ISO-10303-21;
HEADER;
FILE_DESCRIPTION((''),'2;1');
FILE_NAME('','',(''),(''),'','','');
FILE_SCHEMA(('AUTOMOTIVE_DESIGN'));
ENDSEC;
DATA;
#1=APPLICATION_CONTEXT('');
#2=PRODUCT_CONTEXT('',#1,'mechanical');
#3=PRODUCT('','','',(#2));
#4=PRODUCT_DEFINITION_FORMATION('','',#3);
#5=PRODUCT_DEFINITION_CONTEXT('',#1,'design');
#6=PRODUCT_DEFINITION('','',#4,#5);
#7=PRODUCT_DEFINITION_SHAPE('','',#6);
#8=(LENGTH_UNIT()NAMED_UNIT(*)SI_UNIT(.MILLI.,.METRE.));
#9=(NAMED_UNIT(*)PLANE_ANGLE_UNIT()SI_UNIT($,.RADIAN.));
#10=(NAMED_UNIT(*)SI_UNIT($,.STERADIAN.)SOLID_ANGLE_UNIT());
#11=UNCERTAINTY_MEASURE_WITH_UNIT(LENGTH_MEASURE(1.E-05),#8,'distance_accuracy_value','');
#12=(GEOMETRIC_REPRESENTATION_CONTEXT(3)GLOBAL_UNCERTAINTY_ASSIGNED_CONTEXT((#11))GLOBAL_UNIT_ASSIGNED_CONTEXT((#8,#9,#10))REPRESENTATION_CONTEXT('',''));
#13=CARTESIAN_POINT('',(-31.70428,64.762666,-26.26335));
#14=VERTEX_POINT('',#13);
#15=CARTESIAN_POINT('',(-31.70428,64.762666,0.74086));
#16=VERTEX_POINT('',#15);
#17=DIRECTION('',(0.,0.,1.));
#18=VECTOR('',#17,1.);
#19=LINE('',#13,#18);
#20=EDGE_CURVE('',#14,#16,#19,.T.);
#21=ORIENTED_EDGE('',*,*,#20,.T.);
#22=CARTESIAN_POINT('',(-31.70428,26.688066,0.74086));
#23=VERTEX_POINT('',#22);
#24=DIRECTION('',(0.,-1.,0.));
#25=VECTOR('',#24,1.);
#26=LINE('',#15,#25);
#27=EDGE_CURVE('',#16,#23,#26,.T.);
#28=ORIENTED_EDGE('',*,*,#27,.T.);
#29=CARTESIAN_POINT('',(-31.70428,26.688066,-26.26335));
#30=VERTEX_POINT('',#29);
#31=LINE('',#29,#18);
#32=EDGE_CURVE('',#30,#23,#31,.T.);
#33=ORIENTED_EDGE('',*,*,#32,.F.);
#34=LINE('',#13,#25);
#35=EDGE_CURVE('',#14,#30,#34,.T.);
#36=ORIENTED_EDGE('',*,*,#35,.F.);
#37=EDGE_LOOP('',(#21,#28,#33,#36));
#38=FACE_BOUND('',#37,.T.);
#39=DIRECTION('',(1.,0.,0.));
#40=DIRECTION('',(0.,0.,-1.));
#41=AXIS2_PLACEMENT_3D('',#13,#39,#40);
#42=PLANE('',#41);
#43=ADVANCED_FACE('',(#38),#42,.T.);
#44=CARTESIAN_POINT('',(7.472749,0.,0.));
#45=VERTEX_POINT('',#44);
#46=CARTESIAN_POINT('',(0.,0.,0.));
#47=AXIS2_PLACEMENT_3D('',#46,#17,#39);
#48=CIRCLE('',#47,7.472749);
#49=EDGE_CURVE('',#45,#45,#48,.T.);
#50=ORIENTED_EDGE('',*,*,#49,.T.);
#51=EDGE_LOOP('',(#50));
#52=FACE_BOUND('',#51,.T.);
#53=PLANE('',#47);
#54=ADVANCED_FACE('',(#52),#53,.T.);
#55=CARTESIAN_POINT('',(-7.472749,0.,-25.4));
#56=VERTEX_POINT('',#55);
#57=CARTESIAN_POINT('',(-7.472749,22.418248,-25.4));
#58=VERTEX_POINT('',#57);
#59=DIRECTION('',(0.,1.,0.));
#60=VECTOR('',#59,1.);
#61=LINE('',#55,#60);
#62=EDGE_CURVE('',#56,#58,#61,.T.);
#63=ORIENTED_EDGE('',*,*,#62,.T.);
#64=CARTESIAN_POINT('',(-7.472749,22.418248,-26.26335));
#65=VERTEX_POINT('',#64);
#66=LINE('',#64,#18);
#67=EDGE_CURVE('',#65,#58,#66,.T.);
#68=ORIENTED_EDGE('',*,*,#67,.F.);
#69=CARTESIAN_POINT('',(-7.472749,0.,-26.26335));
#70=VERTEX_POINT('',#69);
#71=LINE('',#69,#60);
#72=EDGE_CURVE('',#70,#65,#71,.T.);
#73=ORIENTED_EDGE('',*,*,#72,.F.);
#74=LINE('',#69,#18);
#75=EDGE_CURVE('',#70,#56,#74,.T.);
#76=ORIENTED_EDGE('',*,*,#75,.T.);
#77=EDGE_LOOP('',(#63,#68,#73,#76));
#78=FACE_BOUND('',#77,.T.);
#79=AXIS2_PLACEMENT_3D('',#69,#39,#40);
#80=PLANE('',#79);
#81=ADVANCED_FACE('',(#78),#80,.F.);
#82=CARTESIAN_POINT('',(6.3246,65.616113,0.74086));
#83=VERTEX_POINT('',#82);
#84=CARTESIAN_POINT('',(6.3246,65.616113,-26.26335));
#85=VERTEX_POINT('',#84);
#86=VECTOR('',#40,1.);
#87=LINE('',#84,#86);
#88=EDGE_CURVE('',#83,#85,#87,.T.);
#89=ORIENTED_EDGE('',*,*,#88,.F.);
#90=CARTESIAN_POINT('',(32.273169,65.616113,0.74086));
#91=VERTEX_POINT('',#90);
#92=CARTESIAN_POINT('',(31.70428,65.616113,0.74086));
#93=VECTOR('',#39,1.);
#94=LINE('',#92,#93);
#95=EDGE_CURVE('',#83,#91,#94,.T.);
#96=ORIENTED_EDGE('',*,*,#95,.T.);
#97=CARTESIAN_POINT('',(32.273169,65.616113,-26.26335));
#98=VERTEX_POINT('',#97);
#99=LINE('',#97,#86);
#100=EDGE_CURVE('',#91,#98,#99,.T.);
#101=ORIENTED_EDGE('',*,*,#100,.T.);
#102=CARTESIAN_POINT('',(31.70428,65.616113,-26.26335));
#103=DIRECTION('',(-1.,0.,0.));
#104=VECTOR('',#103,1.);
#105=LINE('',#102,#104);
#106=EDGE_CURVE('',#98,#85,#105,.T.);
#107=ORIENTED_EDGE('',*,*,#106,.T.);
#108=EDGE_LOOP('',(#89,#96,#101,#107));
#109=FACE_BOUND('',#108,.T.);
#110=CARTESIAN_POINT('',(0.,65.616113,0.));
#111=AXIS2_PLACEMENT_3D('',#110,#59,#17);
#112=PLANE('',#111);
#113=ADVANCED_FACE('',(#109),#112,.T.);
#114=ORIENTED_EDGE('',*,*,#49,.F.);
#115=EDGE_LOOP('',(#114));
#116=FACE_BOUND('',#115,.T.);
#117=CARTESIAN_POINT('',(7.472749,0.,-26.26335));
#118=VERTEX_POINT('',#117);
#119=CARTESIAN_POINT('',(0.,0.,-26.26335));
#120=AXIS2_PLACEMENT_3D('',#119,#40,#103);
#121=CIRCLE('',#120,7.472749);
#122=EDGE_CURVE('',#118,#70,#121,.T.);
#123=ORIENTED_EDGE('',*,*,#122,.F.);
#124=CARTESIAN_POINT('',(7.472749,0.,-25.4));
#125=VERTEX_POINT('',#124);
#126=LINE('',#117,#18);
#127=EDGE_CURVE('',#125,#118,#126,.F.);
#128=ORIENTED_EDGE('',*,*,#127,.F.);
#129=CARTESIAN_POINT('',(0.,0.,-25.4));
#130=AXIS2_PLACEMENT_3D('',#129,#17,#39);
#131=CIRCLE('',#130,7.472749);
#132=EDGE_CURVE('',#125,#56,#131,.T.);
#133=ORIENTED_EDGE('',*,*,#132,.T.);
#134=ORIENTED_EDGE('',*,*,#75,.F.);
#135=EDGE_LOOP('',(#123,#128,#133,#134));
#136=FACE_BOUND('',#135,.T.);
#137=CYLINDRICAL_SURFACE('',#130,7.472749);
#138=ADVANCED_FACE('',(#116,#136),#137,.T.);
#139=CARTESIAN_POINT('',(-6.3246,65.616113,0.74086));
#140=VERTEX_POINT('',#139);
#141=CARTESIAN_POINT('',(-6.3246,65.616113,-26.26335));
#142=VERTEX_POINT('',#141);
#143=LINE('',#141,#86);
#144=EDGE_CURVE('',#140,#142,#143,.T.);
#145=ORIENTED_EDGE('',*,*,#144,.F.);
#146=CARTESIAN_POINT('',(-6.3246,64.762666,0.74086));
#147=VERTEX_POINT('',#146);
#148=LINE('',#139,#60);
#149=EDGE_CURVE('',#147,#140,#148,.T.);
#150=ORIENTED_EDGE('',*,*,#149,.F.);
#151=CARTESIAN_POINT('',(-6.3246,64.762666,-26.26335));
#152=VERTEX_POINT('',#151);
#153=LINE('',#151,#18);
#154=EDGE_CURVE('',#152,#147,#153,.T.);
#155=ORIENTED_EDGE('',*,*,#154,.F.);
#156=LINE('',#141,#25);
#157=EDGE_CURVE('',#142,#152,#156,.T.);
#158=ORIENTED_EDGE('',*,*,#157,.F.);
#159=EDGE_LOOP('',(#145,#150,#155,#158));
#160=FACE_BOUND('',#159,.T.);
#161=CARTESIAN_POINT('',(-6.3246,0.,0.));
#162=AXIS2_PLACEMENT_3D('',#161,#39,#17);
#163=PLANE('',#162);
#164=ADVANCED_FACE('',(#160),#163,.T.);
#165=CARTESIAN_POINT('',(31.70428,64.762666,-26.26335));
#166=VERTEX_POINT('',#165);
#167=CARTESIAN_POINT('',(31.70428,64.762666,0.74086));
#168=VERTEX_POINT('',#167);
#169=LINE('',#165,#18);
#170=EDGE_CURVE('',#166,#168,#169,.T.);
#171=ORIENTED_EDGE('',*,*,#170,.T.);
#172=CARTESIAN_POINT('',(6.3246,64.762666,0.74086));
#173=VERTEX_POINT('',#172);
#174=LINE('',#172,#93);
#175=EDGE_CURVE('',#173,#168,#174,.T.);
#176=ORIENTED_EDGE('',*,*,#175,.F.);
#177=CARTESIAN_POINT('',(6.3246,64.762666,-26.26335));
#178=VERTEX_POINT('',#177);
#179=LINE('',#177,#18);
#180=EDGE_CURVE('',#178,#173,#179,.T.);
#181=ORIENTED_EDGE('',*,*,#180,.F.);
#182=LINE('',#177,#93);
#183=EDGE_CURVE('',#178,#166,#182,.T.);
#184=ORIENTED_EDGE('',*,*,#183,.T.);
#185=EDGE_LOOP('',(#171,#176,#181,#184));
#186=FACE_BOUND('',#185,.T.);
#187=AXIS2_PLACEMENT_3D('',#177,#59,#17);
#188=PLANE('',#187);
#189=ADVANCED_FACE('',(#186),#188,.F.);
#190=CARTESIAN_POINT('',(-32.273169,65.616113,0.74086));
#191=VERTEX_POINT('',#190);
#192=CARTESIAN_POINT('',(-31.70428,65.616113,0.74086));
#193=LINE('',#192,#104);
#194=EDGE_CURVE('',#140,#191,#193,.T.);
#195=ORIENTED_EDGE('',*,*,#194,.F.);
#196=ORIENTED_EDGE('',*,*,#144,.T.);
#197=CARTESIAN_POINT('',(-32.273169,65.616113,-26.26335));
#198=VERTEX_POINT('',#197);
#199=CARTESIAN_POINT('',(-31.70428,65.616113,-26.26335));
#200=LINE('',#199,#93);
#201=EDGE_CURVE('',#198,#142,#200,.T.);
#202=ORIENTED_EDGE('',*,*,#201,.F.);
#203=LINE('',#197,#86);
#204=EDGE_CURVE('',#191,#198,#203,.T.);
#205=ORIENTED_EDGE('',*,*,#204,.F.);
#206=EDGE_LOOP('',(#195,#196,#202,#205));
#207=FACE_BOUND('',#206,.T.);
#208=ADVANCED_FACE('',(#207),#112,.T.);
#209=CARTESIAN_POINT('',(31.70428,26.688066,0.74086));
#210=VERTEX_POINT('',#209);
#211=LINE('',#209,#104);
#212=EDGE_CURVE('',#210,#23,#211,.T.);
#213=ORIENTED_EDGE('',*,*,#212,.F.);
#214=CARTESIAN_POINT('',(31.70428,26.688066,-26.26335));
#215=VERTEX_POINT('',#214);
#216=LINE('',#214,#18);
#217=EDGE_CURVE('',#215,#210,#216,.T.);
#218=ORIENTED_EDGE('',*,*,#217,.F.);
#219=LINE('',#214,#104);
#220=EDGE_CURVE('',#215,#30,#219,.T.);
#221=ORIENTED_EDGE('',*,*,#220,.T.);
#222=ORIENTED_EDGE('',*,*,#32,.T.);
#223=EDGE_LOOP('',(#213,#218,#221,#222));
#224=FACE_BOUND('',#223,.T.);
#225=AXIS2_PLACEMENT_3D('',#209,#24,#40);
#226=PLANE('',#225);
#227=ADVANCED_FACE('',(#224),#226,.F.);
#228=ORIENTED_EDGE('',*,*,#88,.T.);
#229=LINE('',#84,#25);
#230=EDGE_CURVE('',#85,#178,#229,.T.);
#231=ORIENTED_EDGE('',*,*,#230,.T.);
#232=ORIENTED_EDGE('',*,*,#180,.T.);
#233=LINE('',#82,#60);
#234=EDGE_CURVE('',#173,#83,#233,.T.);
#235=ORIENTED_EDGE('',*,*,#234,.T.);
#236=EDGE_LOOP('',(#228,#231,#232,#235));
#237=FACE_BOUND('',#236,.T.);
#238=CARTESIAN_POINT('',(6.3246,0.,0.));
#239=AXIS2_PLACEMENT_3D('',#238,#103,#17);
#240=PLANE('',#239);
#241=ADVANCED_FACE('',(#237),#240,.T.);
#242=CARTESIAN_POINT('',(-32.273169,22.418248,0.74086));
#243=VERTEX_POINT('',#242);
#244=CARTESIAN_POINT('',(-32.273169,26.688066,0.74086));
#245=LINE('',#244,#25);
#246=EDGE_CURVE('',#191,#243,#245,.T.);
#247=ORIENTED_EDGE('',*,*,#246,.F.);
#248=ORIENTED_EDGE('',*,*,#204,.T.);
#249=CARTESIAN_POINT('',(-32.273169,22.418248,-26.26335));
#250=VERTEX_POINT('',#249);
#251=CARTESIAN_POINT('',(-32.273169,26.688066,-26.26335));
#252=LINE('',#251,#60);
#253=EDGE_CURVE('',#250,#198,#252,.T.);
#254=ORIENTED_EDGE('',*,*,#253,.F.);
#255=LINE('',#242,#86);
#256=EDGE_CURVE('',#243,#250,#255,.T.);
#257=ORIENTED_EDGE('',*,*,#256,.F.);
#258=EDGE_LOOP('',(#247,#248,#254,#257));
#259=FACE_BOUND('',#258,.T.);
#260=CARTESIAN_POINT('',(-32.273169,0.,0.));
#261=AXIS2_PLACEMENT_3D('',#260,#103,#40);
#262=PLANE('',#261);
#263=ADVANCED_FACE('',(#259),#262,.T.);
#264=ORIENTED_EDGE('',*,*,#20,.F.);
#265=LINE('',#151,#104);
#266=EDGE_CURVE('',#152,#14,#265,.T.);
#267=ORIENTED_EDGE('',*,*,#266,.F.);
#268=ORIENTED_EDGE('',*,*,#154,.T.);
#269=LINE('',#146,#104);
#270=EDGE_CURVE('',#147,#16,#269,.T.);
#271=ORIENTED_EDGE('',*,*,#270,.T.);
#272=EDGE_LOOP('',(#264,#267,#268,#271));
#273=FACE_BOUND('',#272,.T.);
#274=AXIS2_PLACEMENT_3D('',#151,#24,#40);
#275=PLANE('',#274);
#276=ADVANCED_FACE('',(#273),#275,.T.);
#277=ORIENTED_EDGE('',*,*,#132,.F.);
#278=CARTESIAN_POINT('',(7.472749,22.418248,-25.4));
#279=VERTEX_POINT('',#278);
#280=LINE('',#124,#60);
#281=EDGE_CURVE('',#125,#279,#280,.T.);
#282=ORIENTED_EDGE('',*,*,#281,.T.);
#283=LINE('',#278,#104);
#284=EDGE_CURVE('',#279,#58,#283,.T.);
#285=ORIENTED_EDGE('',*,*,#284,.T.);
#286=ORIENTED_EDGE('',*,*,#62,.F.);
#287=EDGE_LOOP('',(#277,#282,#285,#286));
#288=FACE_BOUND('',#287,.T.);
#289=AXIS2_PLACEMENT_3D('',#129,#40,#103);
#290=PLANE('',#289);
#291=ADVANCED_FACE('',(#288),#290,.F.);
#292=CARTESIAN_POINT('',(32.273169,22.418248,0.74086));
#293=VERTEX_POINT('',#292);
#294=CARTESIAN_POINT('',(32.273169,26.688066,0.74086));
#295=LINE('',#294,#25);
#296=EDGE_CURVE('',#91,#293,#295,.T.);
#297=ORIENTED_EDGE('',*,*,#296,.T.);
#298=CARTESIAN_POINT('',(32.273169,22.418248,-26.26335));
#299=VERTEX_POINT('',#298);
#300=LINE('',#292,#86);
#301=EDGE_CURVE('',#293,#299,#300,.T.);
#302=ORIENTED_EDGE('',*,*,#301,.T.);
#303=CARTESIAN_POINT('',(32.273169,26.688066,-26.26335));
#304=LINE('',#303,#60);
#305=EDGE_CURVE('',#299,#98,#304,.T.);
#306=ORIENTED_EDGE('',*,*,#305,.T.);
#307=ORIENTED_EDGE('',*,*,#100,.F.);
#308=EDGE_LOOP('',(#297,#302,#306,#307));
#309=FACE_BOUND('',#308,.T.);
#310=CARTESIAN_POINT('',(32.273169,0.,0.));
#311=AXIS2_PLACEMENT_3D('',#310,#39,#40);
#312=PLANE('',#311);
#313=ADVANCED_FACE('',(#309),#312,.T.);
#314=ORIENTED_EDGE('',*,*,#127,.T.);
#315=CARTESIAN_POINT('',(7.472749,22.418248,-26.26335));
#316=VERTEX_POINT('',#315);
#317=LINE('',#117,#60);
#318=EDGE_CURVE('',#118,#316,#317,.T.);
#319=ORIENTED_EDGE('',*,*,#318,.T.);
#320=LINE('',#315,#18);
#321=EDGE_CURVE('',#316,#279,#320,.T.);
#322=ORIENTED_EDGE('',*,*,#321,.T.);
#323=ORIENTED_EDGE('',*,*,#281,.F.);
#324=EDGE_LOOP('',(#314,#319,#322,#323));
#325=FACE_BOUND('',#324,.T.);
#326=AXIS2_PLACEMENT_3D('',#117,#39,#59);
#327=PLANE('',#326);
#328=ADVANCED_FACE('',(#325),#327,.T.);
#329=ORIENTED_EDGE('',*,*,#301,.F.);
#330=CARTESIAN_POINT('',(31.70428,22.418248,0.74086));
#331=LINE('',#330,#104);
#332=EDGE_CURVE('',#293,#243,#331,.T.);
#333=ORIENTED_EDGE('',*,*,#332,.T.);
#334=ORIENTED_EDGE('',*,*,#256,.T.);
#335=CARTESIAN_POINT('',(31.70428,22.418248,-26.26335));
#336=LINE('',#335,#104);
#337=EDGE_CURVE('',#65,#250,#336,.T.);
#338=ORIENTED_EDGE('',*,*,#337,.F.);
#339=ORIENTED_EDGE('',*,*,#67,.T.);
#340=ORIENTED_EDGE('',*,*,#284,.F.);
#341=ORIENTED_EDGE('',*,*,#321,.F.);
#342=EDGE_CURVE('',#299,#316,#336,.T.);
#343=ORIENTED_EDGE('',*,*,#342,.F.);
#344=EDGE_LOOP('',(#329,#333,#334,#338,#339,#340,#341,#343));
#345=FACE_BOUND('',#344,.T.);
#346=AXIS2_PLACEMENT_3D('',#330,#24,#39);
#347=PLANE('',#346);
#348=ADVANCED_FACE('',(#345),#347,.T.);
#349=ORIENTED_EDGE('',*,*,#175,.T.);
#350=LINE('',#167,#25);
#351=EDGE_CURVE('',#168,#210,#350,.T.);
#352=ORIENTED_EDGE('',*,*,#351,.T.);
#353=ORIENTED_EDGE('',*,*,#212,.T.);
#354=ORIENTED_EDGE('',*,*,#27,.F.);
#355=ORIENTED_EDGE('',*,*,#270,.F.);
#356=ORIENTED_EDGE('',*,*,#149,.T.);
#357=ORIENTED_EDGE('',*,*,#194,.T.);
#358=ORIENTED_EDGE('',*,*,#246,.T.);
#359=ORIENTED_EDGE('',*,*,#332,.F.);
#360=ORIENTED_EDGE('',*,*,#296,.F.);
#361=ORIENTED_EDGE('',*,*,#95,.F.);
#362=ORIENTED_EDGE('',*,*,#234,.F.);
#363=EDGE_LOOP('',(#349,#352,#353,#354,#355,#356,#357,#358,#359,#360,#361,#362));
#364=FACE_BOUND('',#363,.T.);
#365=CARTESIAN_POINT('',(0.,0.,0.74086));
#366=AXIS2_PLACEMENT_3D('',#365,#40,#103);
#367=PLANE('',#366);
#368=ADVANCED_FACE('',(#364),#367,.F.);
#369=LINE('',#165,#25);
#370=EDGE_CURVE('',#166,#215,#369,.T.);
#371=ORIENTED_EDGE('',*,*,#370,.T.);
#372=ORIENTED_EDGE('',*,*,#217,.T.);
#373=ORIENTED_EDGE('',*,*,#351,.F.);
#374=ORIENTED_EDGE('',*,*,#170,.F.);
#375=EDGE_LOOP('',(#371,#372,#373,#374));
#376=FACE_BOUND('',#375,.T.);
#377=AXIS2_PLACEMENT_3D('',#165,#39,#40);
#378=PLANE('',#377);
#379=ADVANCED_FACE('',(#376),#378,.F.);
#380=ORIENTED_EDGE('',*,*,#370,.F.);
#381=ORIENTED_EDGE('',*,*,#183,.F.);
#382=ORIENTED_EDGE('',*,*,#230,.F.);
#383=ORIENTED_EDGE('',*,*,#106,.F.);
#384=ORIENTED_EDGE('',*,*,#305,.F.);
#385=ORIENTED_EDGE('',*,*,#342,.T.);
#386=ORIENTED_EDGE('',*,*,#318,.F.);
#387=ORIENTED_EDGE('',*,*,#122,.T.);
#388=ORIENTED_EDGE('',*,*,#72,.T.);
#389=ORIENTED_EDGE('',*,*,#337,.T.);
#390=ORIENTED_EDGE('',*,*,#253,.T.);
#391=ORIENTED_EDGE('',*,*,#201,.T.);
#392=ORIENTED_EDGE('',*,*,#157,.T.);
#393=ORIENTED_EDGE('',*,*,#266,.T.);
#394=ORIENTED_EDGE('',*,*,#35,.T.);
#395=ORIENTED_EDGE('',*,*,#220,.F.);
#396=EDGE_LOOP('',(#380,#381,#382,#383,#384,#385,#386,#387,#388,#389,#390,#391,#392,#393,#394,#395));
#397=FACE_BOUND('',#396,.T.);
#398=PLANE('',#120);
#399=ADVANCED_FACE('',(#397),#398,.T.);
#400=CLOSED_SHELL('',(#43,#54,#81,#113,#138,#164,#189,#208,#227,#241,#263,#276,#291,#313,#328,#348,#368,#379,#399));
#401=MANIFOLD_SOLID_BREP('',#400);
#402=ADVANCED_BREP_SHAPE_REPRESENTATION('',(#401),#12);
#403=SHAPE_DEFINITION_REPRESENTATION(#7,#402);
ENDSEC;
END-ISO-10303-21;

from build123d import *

# Parameters (mm, degrees)
SKETCH1_R           = 7.472749452
BOSS_EXTRUDE1_DEPTH = 25.4
BOSS_EXTRUDE2_DEPTH = 0.863350236
SKETCH4_W           = 63.40856
SKETCH4_H           = 4.26981756
BOSS_EXTRUDE3_DEPTH = 27.00421054
SKETCH6_W           = 27.00421054
SKETCH6_H           = 4.26981756
BOSS_EXTRUDE4_DEPTH = 0.56888896
SKETCH7_W           = 0.56888896
SKETCH7_H           = 27.00421054
BOSS_EXTRUDE5_DEPTH = 38.0746
SKETCH8_W           = 0.56888896
SKETCH8_H           = 27.00421054
BOSS_EXTRUDE6_DEPTH = 0.853447309
SKETCH9_W           = 27.00421054
SKETCH9_H           = 0.853447309
BOSS_EXTRUDE7_DEPTH = 25.37968


with BuildPart() as part:
    # Sketch1 → Boss-Extrude1 (new body)
    with BuildSketch(Plane.XY):
        Circle(SKETCH1_R)
    extrude(amount=-BOSS_EXTRUDE1_DEPTH)

    # Sketch2 → Boss-Extrude2 (add)
    with BuildSketch(Plane(origin=(0, 0, -25.4), x_dir=(-1, 0, 0), z_dir=(0, 0, -1))):
        with BuildLine():
            Line((-7.472749452, 22.418248356), (-7.472749452, 0))
            ThreePointArc((-7.472749452, 0), (0, -7.472749452), (7.472749452, 0))
            Line((7.472749452, 0), (7.472749452, 22.418248356))
            Line((7.472749452, 22.418248356), (-7.472749452, 22.418248356))
        make_face()
    extrude(amount=BOSS_EXTRUDE2_DEPTH)

    # Sketch4 → Boss-Extrude3 (add)
    with BuildSketch(Plane(origin=(0, 0, -26.263350236), x_dir=(-1, 0, 0), z_dir=(0, 0, -1))):
        with Locations((0, 24.553157136)):
            Rectangle(SKETCH4_W, SKETCH4_H)
    extrude(amount=-BOSS_EXTRUDE3_DEPTH)

    # Sketch6 → Boss-Extrude4 (add)
    with BuildSketch(Plane(origin=(31.70428, 0, 0), x_dir=(0, 0, -1), z_dir=(1, 0, 0))):
        with Locations((12.761244966, 24.553157136)):
            Rectangle(SKETCH6_W, SKETCH6_H)
    boss_extrude4 = extrude(amount=BOSS_EXTRUDE4_DEPTH)

    # Sketch7 → Boss-Extrude5 (add)
    with BuildSketch(Plane(origin=(0, 26.688065916, 0), x_dir=(1, 0, 0), z_dir=(0, 1, 0))):
        with Locations((31.98872448, 12.761244966)):
            Rectangle(SKETCH7_W, SKETCH7_H)
    boss_extrude5 = extrude(amount=BOSS_EXTRUDE5_DEPTH)

    # Sketch8 → Boss-Extrude6 (add)
    with BuildSketch(Plane(origin=(0, 64.762665916, 0), x_dir=(1, 0, 0), z_dir=(0, 1, 0))):
        with Locations((31.98872448, 12.761244966)):
            Rectangle(SKETCH8_W, SKETCH8_H)
    boss_extrude6 = extrude(amount=BOSS_EXTRUDE6_DEPTH)

    # Sketch9 → Boss-Extrude7 (add)
    with BuildSketch(Plane.ZY.offset(-31.70428)):
        with Locations((-12.761244966, 65.18938957)):
            Rectangle(SKETCH9_W, SKETCH9_H)
    boss_extrude7 = extrude(amount=BOSS_EXTRUDE7_DEPTH)

    # Mirror1: Boss-Extrude4, Boss-Extrude5, Boss-Extrude6, Boss-Extrude7 across plane
    add(boss_extrude4.mirror(Plane(origin=(0, 0, 0), x_dir=(0, 0, 1), z_dir=(1, 0, 0))))
    add(boss_extrude5.mirror(Plane(origin=(0, 0, 0), x_dir=(0, 0, 1), z_dir=(1, 0, 0))))
    add(boss_extrude6.mirror(Plane(origin=(0, 0, 0), x_dir=(0, 0, 1), z_dir=(1, 0, 0))))
    add(boss_extrude7.mirror(Plane(origin=(0, 0, 0), x_dir=(0, 0, 1), z_dir=(1, 0, 0))))


solid = part.part
